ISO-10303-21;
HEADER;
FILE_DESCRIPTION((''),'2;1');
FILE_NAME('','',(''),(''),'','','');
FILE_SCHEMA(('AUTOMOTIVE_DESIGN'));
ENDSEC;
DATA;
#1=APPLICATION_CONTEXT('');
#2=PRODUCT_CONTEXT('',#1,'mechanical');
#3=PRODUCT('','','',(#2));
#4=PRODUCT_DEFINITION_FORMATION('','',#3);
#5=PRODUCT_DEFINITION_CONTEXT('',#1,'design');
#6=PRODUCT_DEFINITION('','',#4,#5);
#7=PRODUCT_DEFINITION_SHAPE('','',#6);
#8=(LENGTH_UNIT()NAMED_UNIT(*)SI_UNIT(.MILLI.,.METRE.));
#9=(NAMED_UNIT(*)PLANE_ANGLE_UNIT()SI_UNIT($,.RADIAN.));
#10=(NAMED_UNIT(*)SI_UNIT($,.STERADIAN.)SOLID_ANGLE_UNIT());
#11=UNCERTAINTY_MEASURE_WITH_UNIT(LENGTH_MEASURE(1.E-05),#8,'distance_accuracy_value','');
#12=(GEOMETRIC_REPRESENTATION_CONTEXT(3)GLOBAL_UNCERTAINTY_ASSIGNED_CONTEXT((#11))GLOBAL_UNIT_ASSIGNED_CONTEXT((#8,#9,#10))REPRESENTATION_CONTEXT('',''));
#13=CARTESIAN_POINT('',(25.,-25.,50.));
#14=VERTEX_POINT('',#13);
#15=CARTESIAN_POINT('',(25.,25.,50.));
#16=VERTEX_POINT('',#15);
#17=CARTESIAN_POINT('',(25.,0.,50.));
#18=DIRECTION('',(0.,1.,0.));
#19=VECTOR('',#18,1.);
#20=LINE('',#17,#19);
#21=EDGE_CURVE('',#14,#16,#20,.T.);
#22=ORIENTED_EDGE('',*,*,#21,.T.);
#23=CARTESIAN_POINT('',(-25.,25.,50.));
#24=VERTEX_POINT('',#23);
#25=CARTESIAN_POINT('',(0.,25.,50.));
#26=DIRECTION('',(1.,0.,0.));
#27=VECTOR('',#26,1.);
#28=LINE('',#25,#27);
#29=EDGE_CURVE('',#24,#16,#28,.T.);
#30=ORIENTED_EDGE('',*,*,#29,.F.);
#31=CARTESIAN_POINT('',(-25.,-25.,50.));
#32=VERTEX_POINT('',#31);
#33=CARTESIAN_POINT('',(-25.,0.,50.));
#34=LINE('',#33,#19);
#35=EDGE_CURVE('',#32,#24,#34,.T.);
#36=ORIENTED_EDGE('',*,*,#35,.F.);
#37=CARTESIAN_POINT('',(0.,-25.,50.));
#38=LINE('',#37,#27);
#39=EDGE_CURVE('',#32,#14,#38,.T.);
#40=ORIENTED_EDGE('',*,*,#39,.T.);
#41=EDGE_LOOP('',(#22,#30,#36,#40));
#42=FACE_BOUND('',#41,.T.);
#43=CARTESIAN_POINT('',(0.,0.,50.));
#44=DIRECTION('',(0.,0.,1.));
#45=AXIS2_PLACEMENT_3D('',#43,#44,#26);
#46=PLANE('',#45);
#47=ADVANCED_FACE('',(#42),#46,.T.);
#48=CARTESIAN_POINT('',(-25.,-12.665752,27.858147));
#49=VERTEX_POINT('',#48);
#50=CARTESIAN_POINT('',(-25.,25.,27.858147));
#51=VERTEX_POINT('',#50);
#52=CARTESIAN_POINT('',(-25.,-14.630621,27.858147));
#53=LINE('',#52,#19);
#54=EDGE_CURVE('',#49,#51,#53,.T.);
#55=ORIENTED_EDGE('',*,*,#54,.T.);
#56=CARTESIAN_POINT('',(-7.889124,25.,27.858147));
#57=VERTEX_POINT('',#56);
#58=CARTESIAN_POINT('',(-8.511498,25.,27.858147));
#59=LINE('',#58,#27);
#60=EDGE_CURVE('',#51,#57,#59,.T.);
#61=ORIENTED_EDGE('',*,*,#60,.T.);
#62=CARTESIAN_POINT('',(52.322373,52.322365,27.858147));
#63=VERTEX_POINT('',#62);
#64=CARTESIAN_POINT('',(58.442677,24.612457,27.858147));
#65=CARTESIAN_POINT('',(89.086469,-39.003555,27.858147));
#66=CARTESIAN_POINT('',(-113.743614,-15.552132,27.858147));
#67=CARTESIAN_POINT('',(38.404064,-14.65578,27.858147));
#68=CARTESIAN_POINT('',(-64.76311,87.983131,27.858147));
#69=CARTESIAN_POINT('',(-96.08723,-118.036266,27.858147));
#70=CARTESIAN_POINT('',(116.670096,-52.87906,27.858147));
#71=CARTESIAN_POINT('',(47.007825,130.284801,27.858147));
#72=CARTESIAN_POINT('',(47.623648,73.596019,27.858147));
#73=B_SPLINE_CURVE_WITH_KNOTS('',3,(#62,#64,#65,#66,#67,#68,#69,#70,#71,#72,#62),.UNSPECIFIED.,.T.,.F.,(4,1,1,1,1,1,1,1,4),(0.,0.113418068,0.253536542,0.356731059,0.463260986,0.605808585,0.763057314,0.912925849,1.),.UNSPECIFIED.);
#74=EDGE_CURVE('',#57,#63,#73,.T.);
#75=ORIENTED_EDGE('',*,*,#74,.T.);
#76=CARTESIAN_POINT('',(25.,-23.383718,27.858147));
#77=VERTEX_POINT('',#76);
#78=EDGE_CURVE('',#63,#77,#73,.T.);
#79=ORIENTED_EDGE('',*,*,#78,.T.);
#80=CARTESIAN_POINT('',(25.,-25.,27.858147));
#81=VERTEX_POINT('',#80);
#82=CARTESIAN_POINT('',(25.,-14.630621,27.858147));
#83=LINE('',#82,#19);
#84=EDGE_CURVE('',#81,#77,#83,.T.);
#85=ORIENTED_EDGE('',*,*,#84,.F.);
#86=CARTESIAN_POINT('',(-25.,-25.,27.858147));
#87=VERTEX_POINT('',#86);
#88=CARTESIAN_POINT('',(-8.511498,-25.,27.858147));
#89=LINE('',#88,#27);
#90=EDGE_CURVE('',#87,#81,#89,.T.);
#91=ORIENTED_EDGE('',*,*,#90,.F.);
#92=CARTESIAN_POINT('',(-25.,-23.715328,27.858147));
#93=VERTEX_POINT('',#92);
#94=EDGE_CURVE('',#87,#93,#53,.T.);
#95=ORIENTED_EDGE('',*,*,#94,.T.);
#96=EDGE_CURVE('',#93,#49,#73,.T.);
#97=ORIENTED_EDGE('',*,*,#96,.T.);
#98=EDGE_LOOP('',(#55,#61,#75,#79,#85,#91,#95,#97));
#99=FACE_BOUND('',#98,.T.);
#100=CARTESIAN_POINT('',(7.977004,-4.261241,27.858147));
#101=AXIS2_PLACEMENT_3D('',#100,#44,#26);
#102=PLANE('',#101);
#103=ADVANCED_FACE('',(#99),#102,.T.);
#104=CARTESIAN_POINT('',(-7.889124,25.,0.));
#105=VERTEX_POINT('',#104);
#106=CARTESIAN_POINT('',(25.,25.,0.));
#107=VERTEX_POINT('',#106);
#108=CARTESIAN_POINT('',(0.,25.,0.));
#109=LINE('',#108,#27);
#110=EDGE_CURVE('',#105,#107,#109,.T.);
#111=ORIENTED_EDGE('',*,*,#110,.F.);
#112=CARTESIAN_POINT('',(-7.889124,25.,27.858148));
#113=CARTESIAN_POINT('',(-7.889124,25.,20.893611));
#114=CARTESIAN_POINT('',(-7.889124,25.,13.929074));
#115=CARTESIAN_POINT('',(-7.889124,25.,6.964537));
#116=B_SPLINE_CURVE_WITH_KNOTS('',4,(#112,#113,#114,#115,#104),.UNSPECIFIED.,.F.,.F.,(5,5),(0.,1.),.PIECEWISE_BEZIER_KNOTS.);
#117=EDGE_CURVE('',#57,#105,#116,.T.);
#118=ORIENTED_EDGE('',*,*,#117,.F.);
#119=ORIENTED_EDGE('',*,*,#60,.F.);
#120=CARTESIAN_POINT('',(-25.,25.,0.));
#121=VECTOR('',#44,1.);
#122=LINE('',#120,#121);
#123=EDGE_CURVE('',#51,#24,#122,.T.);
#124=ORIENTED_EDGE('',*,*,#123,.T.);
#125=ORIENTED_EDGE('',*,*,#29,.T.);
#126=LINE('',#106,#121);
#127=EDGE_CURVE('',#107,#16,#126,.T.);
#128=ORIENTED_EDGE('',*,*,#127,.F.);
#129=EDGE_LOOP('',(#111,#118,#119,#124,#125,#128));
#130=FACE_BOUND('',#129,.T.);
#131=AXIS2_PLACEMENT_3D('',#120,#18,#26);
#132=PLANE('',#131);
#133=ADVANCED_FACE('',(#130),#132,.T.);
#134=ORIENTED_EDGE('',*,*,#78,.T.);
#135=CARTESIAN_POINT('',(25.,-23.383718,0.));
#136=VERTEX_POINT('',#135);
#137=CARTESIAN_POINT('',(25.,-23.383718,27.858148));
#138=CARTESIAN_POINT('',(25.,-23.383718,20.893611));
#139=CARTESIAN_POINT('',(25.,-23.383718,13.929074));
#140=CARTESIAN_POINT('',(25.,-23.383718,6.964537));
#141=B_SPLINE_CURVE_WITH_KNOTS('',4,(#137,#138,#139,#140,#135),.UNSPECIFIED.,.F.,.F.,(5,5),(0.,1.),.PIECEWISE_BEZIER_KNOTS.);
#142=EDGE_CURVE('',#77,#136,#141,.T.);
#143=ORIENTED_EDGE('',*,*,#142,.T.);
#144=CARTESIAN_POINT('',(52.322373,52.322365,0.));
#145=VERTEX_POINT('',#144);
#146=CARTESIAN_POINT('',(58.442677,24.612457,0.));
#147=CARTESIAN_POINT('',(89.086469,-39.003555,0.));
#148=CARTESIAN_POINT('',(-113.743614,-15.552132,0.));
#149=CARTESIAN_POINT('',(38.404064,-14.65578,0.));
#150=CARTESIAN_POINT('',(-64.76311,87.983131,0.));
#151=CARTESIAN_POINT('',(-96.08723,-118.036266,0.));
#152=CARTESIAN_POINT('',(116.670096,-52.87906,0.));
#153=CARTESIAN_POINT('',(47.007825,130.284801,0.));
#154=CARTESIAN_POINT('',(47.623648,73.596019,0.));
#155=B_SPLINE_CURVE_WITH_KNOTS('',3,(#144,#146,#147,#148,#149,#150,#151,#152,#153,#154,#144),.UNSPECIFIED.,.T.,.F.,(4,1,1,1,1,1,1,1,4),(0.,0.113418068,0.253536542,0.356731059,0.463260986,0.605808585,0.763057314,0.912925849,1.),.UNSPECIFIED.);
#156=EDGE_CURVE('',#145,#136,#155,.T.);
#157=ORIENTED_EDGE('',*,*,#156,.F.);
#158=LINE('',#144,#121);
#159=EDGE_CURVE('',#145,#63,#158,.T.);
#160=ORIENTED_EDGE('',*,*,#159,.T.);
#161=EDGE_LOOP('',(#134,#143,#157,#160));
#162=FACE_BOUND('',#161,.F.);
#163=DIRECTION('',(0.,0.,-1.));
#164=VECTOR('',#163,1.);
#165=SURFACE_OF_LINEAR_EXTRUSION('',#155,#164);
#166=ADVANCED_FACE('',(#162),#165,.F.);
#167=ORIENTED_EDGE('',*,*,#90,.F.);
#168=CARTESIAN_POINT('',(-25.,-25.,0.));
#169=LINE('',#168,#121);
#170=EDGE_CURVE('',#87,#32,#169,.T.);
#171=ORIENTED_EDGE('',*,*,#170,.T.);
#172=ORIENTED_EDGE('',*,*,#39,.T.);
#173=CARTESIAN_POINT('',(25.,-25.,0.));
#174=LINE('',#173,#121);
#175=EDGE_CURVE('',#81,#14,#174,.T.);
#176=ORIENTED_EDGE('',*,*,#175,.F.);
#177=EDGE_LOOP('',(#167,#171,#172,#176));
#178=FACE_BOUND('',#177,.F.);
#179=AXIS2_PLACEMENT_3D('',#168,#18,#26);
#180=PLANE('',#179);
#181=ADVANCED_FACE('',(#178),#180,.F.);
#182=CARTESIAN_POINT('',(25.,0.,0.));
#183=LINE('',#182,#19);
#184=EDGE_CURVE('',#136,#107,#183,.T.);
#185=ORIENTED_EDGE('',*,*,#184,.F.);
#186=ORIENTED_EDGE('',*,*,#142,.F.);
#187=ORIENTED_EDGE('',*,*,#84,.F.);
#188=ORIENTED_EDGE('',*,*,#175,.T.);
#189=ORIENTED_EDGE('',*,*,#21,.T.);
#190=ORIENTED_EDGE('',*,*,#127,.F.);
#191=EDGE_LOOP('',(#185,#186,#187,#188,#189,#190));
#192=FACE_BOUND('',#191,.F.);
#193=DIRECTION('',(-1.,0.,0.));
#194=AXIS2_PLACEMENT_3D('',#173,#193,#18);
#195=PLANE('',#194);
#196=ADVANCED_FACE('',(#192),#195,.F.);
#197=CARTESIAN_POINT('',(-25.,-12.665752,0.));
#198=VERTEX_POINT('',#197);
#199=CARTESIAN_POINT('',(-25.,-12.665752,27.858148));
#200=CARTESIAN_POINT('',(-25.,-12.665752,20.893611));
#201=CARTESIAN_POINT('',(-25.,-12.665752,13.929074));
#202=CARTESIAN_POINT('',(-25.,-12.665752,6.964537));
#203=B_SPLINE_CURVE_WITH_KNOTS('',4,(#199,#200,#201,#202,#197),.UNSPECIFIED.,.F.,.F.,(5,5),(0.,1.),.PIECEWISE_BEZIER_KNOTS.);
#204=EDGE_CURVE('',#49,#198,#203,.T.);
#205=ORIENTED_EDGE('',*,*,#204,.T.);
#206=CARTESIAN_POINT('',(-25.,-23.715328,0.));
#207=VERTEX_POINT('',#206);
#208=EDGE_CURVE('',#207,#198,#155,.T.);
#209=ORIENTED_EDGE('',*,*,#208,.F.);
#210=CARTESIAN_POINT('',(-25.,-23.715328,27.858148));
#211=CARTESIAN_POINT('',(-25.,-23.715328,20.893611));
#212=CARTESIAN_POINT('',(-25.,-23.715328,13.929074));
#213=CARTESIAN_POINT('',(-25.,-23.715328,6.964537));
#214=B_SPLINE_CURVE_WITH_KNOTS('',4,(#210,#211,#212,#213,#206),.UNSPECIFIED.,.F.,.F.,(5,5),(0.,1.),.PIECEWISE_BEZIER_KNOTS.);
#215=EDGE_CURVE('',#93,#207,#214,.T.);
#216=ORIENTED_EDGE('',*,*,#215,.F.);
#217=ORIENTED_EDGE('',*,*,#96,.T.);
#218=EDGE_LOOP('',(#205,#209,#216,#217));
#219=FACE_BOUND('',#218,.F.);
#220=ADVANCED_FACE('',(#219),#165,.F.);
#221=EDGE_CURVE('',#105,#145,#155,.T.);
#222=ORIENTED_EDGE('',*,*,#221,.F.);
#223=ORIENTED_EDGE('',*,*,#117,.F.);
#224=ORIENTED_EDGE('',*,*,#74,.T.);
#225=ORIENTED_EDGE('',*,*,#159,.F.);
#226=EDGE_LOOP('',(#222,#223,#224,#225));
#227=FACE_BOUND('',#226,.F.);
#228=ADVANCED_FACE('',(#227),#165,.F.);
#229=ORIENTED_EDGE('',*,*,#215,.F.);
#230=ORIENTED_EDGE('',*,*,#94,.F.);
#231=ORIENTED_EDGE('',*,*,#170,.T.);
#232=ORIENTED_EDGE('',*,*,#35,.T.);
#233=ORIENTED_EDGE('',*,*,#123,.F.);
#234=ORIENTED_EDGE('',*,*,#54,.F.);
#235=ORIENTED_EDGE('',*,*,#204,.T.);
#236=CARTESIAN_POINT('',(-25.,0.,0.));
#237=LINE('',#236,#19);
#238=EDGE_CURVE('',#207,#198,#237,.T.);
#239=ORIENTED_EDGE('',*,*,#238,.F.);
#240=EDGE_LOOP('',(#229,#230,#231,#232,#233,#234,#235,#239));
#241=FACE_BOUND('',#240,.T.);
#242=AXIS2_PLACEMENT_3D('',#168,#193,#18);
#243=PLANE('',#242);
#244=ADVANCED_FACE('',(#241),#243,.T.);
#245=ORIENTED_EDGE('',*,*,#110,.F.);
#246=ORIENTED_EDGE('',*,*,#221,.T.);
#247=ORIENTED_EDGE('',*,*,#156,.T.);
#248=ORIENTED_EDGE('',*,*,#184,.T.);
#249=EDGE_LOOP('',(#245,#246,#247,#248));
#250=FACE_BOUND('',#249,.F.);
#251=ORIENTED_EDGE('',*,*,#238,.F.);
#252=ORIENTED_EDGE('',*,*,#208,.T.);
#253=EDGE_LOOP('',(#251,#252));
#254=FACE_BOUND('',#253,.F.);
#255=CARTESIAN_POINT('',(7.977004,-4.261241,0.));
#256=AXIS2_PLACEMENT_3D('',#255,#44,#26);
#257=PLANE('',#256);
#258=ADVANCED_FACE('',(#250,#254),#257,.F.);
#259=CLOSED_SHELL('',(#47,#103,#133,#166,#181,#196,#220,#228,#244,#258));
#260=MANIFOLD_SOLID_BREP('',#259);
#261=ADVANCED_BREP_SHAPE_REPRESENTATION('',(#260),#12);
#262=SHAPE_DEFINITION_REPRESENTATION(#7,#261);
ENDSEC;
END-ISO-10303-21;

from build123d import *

# Parameters (mm, degrees)
F0_W     = 50
F0_H     = 50
F1_DEPTH = 50
F3_DEPTH = 27.8581473976


# Not quite as in the source:
# - a feature names something its author has since deleted; it is built from what else it names


with BuildPart() as f1:
    # F0 (on Top) → F1 (new body)
    with BuildSketch(Plane.XY):
        Rectangle(F0_W, F0_H)
    extrude(amount=F1_DEPTH)

    # F2 (on Top) → F3 (join)
    with BuildSketch(Plane.XY):
        with BuildLine():
            add(Edge.make_bspline(
                [(52.3223727942, 52.3223653436), (58.4426768344, 24.6124569356), (89.0864693147, -39.0035553174), (-113.7436141158, -15.5521322754), (38.4040637994, -14.655780005), (-64.7631097157, 87.9831313006), (-96.0872297903, -118.0362663459), (116.6700963492, -52.8790603504), (47.0078253263, 130.2848007445), (47.6236481067, 73.5960193758), (52.3223727942, 52.3223653436)],
                knots=[0, 0, 0, 0, 0.1134180678, 0.2535365417, 0.3567310586, 0.4632609861, 0.6058085851, 0.7630573143, 0.9129258495, 1, 1, 1, 1], degree=3))
        make_face()
    extrude(amount=F3_DEPTH)


solid = f1.part
